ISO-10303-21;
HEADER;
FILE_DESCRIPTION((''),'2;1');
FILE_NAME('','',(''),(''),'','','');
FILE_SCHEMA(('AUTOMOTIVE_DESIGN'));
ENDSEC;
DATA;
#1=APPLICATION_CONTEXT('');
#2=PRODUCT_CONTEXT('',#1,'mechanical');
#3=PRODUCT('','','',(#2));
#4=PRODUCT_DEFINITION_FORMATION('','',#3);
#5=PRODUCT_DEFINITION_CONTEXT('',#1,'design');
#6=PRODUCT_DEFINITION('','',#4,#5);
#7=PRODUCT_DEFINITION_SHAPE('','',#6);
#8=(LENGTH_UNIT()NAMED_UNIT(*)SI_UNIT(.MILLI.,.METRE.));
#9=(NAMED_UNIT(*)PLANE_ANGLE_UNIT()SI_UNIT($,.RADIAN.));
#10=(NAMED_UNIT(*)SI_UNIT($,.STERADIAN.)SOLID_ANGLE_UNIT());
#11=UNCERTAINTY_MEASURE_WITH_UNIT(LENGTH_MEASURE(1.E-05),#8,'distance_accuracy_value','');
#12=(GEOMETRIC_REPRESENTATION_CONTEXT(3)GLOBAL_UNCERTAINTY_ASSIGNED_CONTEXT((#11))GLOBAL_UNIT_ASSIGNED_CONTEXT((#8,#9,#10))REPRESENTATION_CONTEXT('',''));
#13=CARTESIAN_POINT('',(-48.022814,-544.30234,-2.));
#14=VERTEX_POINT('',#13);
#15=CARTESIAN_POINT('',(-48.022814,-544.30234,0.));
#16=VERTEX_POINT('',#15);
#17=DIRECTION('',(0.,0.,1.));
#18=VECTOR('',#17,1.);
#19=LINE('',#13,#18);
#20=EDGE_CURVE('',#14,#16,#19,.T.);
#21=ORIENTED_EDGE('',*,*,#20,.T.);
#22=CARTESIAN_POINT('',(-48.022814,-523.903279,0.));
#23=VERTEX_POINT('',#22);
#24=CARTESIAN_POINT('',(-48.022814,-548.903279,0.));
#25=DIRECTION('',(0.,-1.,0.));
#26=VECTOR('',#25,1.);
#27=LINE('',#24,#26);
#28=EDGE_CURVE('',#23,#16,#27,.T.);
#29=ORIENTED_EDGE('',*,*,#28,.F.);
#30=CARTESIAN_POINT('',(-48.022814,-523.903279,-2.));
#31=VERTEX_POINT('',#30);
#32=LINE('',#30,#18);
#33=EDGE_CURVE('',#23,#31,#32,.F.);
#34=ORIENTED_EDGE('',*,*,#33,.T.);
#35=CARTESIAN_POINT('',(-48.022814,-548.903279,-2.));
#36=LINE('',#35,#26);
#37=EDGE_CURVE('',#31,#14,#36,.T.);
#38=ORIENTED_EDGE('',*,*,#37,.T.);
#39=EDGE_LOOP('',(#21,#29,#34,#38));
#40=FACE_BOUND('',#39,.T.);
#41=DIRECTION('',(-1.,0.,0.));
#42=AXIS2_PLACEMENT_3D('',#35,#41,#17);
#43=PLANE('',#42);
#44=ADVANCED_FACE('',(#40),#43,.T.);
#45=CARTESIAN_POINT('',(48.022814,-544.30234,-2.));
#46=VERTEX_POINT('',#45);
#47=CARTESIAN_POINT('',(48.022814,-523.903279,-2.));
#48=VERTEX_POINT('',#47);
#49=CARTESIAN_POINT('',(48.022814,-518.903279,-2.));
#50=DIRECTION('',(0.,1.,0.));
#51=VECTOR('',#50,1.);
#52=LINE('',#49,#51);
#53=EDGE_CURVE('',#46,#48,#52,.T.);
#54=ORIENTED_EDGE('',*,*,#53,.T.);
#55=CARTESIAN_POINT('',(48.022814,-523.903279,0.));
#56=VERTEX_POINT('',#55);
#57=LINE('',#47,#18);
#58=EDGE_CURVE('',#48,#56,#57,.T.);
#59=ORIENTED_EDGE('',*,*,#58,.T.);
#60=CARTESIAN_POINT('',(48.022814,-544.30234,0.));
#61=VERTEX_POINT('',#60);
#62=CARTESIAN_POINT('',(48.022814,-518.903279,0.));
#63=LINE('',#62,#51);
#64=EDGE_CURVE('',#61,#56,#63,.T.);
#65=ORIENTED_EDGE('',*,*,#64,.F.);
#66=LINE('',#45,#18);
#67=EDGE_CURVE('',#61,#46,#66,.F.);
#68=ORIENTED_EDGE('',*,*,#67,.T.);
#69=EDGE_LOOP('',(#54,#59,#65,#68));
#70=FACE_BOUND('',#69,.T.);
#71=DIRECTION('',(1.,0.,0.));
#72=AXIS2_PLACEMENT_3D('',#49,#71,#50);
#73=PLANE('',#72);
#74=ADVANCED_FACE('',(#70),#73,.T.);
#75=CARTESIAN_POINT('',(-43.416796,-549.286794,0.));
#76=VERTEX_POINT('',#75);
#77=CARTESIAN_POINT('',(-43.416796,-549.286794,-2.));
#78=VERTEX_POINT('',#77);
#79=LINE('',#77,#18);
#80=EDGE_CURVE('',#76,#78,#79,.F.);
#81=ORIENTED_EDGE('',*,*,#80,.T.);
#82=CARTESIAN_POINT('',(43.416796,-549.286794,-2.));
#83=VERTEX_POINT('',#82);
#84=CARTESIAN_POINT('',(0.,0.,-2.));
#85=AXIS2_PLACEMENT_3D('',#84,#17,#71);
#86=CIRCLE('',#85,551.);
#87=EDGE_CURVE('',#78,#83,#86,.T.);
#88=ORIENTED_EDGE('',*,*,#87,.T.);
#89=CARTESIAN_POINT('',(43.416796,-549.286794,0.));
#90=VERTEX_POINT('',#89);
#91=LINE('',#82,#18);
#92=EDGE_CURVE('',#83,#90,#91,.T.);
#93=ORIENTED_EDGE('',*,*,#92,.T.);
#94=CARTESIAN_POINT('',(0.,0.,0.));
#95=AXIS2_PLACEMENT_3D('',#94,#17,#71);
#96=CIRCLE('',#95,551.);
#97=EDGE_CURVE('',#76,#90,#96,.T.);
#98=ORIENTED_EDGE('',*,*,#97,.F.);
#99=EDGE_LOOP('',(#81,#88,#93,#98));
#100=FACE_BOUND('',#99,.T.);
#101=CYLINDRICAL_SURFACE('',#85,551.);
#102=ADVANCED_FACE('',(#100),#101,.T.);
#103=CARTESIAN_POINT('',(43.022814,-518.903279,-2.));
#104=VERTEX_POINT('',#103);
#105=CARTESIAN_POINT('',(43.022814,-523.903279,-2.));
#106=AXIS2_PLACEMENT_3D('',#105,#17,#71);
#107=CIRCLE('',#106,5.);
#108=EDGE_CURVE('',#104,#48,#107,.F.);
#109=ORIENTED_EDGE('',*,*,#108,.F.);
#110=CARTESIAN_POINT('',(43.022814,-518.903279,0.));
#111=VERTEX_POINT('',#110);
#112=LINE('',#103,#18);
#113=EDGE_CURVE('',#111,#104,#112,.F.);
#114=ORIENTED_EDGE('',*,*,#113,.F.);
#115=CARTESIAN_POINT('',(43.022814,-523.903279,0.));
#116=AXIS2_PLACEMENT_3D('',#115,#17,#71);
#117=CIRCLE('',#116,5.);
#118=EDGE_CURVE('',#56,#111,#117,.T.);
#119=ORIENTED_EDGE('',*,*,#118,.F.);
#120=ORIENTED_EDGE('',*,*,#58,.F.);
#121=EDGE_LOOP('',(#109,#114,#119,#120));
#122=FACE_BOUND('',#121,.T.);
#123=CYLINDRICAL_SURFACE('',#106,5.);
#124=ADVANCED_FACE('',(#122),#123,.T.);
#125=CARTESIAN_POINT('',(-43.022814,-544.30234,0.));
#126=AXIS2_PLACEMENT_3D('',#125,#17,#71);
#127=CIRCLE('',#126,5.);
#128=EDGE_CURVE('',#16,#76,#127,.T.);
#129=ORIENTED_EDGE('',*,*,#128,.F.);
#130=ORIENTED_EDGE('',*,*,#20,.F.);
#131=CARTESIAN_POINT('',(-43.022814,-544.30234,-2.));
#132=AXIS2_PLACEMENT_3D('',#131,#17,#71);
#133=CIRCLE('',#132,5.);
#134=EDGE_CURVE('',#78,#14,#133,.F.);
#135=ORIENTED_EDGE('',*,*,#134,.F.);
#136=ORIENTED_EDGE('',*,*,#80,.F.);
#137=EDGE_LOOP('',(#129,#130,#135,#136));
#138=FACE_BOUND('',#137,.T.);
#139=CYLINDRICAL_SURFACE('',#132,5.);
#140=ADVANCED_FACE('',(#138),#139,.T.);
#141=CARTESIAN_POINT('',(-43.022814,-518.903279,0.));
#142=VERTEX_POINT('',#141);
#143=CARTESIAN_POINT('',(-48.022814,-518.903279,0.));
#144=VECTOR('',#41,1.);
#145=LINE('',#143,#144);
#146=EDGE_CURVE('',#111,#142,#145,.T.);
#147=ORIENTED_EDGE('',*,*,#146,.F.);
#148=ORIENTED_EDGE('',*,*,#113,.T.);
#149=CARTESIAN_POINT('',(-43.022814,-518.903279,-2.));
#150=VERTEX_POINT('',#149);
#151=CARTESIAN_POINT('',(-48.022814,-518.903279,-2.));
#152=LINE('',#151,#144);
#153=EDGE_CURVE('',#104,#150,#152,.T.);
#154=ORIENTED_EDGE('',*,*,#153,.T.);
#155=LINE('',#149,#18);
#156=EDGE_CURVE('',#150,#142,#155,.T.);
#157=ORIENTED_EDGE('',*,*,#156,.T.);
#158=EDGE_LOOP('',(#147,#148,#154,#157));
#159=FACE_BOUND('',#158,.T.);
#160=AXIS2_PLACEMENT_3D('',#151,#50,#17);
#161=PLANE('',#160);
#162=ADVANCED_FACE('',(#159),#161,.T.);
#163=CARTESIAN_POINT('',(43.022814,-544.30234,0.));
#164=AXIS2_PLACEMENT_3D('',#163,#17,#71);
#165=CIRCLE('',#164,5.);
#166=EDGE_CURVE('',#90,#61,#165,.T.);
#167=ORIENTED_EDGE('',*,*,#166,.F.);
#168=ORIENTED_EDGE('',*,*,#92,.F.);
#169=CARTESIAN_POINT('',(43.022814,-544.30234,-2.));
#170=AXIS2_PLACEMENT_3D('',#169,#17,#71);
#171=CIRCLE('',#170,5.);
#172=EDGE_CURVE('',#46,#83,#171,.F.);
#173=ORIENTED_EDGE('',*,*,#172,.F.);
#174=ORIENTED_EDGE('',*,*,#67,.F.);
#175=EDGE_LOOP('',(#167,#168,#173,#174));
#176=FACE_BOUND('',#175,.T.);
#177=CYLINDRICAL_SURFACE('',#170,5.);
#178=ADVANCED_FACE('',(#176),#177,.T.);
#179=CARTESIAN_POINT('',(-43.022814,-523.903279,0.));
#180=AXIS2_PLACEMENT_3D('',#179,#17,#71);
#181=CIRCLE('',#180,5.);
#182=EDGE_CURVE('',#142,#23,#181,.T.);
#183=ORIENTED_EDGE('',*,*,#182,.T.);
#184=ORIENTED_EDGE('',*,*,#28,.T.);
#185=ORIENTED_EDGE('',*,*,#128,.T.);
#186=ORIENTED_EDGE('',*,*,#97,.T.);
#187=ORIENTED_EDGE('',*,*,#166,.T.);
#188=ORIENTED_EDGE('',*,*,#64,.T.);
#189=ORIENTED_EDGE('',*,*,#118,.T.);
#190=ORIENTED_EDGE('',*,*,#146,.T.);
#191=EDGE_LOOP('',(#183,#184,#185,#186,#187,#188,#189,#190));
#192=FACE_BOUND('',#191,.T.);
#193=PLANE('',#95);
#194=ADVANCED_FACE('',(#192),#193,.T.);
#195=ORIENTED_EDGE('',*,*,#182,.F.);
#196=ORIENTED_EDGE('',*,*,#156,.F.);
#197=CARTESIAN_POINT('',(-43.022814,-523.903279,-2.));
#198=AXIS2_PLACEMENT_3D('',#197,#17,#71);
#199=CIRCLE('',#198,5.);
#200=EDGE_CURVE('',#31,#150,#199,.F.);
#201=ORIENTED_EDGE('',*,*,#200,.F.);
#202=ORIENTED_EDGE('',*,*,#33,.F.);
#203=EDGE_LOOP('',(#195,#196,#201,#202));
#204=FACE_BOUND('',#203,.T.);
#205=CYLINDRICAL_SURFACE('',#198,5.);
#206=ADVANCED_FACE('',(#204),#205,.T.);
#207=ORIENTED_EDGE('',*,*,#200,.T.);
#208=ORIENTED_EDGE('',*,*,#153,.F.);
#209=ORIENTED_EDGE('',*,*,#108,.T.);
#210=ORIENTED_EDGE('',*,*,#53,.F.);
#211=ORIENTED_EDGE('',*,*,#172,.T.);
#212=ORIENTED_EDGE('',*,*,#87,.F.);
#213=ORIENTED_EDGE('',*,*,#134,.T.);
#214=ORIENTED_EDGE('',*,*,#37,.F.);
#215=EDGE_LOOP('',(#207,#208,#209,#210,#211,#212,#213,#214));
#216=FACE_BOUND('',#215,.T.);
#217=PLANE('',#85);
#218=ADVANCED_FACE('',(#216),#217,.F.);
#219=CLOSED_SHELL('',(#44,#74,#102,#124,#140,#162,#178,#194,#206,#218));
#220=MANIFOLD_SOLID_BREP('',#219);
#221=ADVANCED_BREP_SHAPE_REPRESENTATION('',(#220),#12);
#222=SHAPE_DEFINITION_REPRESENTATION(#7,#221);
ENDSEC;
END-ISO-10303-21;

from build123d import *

# Parameters (mm, degrees)
SM_START               = -2
SM_BASE_FLANGE_1_DEPTH = 2
FILLET_1_R             = 5


# Read off the part's stored shape, not the designer's step: 基体-法兰1
with BuildPart() as part:
    # 基体-法兰1 outline → 基体-法兰1 (new body)
    with BuildSketch(Plane.XY.offset(SM_START)):
        with BuildLine():
            Line((-48.022814254, -518.903278649), (-48.022814254, -548.903278649))
            ThreePointArc((-48.022814254, -548.903278649), (0, -551), (48.022814254, -548.903278649))
            Line((48.022814254, -548.903278649), (48.022814254, -518.903278649))
            Line((48.022814254, -518.903278649), (-48.022814254, -518.903278649))
        make_face()
    extrude(amount=SM_BASE_FLANGE_1_DEPTH)

    # 圆角1
    fillet_1_edges = [part.edges().sort_by_distance(p)[0] for p in [
        (-48.022814254, -548.903278649, -1),
        (-48.022814254, -518.903278649, -1),
        (48.022814254, -518.903278649, -1),
        (48.022814254, -548.903278649, -1),
    ]]
    fillet(fillet_1_edges, radius=FILLET_1_R)


solid = part.part
